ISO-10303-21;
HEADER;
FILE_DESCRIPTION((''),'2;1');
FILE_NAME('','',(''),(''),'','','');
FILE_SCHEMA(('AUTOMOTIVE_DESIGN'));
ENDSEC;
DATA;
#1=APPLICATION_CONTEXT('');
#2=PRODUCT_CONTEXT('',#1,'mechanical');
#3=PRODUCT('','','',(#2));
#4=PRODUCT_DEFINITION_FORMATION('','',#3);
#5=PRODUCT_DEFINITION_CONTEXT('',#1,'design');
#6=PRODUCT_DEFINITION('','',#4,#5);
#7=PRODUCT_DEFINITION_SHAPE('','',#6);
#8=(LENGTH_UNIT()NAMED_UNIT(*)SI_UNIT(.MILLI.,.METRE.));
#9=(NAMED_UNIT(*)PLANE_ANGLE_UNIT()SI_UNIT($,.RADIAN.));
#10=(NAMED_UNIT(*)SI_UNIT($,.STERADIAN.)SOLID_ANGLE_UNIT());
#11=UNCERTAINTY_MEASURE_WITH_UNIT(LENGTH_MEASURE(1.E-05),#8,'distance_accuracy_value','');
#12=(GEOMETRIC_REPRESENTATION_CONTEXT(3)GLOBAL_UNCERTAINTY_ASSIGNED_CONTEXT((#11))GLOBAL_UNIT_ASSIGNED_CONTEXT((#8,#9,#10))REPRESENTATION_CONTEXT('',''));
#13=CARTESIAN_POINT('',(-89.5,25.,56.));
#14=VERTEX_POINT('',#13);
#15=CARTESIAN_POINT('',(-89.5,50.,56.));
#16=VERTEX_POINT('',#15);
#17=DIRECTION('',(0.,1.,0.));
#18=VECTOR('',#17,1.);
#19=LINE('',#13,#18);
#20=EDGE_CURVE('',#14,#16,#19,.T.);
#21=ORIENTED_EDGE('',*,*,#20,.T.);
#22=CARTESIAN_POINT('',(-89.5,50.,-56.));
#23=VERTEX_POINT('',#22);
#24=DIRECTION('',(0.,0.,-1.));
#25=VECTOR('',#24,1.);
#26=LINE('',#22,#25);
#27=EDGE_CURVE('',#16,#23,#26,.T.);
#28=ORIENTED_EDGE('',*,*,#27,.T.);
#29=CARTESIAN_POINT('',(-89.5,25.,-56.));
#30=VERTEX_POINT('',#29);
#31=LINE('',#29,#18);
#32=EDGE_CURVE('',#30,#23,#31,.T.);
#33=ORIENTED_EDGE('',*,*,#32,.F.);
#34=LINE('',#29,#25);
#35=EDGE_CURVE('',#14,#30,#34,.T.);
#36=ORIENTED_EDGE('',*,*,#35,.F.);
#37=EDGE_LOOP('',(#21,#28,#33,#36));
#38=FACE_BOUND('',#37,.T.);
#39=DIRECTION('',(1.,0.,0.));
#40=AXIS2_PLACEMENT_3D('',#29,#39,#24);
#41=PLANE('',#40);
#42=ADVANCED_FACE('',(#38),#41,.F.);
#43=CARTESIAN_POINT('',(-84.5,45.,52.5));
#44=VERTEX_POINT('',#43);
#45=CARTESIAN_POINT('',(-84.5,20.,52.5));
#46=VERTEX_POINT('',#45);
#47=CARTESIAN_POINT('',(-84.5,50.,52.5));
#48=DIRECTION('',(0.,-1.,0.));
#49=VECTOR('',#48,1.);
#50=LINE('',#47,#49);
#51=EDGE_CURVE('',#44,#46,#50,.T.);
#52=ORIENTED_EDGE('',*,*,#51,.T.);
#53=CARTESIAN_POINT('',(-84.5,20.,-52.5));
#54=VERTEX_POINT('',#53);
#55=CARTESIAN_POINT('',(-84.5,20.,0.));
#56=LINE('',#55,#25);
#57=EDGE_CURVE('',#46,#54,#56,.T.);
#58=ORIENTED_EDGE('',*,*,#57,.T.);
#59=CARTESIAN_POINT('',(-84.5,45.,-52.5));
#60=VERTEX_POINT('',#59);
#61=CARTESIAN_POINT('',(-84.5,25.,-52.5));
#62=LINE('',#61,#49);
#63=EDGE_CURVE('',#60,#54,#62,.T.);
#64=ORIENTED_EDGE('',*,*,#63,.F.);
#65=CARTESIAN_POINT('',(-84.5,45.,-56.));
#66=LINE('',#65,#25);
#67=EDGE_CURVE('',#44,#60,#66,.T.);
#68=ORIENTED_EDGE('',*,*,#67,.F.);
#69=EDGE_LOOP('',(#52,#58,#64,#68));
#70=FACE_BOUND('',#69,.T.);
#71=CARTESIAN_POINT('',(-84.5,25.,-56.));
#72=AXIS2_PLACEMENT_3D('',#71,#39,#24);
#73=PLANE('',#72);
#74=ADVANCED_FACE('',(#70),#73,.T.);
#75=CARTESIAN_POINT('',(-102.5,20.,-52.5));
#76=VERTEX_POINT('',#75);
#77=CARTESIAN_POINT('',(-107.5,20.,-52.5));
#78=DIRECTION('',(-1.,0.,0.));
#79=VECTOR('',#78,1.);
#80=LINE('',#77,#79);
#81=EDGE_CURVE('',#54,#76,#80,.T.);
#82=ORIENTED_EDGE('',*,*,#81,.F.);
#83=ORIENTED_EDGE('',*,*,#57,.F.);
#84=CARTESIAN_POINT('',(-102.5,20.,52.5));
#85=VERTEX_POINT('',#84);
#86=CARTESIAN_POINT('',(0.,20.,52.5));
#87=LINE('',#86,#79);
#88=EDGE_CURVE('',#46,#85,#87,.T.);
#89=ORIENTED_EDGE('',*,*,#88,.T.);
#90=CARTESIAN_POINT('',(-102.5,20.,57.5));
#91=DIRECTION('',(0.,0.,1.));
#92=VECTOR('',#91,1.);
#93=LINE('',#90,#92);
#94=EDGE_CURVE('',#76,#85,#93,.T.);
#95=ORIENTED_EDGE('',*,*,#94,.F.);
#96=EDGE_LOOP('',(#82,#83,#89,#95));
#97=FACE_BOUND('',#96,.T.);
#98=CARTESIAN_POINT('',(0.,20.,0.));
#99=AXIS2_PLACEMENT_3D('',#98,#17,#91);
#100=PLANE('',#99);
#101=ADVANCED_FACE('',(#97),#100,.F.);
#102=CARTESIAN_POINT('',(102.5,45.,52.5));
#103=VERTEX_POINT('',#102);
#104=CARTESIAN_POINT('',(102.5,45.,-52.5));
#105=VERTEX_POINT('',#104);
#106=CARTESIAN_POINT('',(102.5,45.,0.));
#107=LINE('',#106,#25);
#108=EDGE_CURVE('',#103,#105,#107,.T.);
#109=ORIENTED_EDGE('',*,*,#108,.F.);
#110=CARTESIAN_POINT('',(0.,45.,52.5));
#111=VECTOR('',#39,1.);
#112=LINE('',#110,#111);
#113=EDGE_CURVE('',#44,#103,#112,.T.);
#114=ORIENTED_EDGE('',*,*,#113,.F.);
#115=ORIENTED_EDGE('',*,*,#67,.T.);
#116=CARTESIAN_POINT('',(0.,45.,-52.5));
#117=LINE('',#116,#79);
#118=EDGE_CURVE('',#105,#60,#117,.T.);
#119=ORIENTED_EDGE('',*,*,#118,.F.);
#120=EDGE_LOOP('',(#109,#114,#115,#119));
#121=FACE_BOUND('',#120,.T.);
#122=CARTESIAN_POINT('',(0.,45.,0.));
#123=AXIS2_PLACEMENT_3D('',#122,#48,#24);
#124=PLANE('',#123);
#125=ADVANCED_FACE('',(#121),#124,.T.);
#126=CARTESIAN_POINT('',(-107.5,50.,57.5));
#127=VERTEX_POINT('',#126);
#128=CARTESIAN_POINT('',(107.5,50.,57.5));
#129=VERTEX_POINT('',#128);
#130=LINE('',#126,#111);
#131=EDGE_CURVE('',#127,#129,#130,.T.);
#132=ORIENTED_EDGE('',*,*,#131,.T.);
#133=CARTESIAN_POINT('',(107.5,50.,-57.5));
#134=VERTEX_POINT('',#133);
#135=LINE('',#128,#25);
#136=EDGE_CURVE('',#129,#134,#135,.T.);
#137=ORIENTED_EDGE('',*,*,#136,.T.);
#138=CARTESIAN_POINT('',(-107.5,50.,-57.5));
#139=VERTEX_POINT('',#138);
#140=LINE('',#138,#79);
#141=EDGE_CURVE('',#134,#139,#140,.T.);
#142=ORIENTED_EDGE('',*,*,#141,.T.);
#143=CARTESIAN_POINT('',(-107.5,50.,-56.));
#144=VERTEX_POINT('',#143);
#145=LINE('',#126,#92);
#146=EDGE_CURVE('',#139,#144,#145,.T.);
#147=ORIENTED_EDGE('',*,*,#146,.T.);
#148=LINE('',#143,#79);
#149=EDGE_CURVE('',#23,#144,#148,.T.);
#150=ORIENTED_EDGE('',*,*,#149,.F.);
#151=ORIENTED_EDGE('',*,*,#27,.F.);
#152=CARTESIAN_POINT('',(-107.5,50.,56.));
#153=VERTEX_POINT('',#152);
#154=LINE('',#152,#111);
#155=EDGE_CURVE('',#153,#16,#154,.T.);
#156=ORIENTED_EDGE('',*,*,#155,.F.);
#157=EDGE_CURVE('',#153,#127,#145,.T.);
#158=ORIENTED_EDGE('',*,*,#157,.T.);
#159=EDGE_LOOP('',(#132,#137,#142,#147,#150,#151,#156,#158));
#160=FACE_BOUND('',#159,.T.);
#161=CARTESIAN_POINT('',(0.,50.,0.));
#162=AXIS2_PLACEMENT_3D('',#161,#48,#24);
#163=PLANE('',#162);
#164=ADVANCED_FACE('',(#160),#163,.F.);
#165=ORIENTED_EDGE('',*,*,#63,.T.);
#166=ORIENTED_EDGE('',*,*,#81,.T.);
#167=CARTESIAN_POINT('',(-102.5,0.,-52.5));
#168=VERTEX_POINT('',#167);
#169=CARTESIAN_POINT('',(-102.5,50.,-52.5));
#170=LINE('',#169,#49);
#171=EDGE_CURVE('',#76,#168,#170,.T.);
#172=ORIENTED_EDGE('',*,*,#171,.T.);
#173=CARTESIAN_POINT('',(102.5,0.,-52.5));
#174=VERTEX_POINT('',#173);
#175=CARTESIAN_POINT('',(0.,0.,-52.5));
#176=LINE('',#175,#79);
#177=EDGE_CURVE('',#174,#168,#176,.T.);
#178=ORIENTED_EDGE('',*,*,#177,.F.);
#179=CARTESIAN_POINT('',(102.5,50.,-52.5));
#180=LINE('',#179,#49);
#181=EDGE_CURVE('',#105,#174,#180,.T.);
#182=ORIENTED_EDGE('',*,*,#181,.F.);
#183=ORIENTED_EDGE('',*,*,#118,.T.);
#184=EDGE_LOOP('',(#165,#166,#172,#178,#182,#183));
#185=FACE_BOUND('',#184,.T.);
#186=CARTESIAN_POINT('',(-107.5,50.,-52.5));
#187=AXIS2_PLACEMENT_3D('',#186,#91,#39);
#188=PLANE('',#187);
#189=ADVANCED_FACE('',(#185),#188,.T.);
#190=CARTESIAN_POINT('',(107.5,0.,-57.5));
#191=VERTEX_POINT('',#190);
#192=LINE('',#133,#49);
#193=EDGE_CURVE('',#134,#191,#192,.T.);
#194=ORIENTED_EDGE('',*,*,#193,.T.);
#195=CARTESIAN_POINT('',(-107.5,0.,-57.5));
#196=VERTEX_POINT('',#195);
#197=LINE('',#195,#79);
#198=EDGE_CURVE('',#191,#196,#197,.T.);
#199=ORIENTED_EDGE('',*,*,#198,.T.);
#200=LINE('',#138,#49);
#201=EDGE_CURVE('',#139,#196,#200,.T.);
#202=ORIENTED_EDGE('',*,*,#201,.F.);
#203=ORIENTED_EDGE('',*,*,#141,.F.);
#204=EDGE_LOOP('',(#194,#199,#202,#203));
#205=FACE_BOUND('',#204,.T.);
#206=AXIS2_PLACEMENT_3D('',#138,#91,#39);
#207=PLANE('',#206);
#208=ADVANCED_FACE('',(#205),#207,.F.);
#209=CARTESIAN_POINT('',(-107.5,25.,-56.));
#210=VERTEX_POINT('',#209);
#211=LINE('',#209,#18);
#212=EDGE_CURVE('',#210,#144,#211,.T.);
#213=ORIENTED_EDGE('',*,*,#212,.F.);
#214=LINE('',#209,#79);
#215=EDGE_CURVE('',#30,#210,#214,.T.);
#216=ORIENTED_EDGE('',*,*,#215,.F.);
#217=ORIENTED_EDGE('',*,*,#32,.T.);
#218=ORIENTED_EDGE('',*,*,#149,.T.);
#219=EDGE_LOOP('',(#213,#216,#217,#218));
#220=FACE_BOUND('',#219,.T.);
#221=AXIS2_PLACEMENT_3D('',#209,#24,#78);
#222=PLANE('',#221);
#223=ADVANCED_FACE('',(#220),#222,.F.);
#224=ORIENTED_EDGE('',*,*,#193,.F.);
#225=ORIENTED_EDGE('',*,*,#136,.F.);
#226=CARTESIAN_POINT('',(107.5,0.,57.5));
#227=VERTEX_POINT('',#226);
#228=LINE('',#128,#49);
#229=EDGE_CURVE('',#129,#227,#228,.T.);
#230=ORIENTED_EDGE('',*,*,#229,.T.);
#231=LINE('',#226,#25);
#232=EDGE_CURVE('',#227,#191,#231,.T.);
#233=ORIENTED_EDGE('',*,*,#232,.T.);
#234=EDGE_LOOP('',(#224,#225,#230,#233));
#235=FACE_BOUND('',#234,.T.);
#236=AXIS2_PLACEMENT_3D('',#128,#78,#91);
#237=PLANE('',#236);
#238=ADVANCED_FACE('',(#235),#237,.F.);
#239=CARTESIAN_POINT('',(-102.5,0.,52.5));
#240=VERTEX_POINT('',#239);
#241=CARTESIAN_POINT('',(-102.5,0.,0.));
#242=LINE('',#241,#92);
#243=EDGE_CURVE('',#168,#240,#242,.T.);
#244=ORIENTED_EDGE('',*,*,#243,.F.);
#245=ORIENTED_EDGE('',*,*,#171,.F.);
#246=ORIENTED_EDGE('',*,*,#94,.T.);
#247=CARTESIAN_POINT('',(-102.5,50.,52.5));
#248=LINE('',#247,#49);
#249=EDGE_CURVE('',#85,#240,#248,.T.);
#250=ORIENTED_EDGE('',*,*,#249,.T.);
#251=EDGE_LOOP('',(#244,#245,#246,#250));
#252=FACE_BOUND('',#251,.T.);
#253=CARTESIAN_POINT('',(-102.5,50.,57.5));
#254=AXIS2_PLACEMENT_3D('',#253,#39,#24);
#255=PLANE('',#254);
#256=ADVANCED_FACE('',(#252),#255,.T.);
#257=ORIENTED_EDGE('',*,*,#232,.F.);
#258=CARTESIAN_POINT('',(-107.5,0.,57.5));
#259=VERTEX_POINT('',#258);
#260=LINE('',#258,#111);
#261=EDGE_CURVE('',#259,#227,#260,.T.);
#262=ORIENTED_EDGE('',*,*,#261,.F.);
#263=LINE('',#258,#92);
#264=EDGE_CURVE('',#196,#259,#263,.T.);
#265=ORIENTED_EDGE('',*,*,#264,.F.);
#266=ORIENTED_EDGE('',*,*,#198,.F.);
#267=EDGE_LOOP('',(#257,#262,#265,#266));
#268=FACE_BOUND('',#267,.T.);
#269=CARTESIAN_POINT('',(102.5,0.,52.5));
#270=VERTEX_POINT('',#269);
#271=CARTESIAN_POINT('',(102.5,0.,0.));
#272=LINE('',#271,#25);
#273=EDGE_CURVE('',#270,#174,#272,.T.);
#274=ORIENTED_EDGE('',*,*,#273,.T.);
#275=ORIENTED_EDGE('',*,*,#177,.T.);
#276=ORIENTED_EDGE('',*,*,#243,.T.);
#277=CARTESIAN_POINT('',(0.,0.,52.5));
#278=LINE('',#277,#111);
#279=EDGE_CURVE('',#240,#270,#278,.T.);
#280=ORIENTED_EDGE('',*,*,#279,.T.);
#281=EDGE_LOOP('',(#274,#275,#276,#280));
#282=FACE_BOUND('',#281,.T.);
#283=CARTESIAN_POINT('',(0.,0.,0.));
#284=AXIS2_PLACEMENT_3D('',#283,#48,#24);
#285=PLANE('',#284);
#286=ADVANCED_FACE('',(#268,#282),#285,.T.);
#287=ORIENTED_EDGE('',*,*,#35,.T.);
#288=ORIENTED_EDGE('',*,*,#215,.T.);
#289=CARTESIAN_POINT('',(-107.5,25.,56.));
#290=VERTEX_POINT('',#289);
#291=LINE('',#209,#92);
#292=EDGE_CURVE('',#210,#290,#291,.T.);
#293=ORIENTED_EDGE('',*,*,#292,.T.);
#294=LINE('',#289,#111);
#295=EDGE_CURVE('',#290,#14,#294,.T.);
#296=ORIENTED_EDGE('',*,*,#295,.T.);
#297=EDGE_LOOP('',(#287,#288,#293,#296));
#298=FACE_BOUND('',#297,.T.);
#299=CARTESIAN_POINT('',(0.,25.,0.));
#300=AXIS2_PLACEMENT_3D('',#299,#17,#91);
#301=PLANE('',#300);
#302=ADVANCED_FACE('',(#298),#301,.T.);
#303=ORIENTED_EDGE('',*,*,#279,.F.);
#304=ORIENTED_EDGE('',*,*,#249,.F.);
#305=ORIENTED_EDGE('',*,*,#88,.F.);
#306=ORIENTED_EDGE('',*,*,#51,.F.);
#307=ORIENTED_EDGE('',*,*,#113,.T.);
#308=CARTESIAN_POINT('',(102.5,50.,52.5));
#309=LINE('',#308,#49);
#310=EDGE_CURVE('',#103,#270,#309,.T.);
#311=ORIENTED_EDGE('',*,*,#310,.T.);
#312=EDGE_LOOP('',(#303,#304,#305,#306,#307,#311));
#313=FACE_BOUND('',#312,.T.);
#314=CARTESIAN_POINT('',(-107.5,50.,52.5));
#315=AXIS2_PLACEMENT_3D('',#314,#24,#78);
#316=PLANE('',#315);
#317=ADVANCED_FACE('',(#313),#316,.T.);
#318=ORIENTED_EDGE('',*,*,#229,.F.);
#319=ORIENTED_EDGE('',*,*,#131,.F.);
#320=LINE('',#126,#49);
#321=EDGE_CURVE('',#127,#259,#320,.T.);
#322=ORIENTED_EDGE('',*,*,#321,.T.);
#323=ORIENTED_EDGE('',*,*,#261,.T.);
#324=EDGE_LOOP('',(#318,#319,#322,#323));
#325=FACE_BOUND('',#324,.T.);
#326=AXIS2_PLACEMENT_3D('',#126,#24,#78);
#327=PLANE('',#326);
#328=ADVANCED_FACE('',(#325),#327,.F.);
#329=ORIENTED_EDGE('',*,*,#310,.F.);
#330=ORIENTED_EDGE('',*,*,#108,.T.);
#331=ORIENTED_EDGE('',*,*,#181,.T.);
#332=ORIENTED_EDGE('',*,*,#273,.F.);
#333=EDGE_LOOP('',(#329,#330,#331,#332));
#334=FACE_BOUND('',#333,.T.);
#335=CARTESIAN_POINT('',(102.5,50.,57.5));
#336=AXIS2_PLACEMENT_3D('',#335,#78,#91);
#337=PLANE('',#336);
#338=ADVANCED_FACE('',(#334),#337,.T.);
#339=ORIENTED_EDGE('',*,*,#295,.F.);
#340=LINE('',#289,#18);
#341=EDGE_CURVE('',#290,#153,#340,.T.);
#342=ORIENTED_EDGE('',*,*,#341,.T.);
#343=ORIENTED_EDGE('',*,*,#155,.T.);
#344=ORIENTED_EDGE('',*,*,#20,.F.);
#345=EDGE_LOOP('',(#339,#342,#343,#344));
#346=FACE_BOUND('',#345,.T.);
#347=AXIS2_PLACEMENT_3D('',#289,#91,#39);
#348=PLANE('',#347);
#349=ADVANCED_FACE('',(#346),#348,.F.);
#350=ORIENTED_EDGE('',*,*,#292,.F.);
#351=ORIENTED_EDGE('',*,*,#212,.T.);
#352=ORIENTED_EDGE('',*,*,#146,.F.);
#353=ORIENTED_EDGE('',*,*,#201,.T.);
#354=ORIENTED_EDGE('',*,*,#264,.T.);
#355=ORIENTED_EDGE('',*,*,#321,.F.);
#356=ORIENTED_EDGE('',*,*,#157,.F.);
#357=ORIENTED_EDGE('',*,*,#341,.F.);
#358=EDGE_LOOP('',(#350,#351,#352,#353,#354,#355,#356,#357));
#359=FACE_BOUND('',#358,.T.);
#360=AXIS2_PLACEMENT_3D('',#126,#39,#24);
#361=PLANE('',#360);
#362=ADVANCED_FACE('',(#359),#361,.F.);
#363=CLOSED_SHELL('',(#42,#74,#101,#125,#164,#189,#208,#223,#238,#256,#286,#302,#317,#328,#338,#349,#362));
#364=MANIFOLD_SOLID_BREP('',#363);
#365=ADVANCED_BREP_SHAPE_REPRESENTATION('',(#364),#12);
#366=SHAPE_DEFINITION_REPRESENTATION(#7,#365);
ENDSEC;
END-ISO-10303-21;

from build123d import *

# Parameters (mm, degrees)
SKETCH1_W           = 215
SKETCH1_H           = 115
BOSS_EXTRUDE1_DEPTH = 50
SKETCH2_W           = 18
SKETCH2_H           = 112
CUT_EXTRUDE2_DEPTH  = 25
SHELL1_START        = -84.5
SHELL1_OUTLINE_W    = 45
SHELL1_OUTLINE_H    = 105
SHELL1_DEPTH        = 187
SHELL1_START_2      = -102.5
SHELL1_2_OUTLINE_W  = 20
SHELL1_2_OUTLINE_H  = 105
SHELL1_2_DEPTH      = 18


# Read off the part's stored shape, not the designer's step: Shell1
with BuildPart() as part:
    # Sketch1 → Boss-Extrude1 (new body)
    with BuildSketch(Plane(origin=(0, 0, 0), x_dir=(1, 0, 0), z_dir=(0, 1, 0))):
        Rectangle(SKETCH1_W, SKETCH1_H)
    extrude(amount=BOSS_EXTRUDE1_DEPTH)

    # Sketch2 → Cut-Extrude2 (cut)
    with BuildSketch(Plane(origin=(0, 50, 0), x_dir=(1, 0, 0), z_dir=(0, 1, 0))):
        with Locations((-98.5, 0)):
            Rectangle(SKETCH2_W, SKETCH2_H)
    extrude(amount=-CUT_EXTRUDE2_DEPTH, mode=Mode.SUBTRACT)

    # Shell1 outline → Shell1 (cut)
    with BuildSketch(Plane.YZ.offset(SHELL1_START)):
        with Locations((22.5, 0)):
            Rectangle(SHELL1_OUTLINE_W, SHELL1_OUTLINE_H)
    extrude(amount=SHELL1_DEPTH, mode=Mode.SUBTRACT)

    # Shell1 2 outline → Shell1 2 (cut)
    with BuildSketch(Plane.YZ.offset(SHELL1_START_2)):
        with Locations((10, 0)):
            Rectangle(SHELL1_2_OUTLINE_W, SHELL1_2_OUTLINE_H)
    extrude(amount=SHELL1_2_DEPTH, mode=Mode.SUBTRACT)


solid = part.part
